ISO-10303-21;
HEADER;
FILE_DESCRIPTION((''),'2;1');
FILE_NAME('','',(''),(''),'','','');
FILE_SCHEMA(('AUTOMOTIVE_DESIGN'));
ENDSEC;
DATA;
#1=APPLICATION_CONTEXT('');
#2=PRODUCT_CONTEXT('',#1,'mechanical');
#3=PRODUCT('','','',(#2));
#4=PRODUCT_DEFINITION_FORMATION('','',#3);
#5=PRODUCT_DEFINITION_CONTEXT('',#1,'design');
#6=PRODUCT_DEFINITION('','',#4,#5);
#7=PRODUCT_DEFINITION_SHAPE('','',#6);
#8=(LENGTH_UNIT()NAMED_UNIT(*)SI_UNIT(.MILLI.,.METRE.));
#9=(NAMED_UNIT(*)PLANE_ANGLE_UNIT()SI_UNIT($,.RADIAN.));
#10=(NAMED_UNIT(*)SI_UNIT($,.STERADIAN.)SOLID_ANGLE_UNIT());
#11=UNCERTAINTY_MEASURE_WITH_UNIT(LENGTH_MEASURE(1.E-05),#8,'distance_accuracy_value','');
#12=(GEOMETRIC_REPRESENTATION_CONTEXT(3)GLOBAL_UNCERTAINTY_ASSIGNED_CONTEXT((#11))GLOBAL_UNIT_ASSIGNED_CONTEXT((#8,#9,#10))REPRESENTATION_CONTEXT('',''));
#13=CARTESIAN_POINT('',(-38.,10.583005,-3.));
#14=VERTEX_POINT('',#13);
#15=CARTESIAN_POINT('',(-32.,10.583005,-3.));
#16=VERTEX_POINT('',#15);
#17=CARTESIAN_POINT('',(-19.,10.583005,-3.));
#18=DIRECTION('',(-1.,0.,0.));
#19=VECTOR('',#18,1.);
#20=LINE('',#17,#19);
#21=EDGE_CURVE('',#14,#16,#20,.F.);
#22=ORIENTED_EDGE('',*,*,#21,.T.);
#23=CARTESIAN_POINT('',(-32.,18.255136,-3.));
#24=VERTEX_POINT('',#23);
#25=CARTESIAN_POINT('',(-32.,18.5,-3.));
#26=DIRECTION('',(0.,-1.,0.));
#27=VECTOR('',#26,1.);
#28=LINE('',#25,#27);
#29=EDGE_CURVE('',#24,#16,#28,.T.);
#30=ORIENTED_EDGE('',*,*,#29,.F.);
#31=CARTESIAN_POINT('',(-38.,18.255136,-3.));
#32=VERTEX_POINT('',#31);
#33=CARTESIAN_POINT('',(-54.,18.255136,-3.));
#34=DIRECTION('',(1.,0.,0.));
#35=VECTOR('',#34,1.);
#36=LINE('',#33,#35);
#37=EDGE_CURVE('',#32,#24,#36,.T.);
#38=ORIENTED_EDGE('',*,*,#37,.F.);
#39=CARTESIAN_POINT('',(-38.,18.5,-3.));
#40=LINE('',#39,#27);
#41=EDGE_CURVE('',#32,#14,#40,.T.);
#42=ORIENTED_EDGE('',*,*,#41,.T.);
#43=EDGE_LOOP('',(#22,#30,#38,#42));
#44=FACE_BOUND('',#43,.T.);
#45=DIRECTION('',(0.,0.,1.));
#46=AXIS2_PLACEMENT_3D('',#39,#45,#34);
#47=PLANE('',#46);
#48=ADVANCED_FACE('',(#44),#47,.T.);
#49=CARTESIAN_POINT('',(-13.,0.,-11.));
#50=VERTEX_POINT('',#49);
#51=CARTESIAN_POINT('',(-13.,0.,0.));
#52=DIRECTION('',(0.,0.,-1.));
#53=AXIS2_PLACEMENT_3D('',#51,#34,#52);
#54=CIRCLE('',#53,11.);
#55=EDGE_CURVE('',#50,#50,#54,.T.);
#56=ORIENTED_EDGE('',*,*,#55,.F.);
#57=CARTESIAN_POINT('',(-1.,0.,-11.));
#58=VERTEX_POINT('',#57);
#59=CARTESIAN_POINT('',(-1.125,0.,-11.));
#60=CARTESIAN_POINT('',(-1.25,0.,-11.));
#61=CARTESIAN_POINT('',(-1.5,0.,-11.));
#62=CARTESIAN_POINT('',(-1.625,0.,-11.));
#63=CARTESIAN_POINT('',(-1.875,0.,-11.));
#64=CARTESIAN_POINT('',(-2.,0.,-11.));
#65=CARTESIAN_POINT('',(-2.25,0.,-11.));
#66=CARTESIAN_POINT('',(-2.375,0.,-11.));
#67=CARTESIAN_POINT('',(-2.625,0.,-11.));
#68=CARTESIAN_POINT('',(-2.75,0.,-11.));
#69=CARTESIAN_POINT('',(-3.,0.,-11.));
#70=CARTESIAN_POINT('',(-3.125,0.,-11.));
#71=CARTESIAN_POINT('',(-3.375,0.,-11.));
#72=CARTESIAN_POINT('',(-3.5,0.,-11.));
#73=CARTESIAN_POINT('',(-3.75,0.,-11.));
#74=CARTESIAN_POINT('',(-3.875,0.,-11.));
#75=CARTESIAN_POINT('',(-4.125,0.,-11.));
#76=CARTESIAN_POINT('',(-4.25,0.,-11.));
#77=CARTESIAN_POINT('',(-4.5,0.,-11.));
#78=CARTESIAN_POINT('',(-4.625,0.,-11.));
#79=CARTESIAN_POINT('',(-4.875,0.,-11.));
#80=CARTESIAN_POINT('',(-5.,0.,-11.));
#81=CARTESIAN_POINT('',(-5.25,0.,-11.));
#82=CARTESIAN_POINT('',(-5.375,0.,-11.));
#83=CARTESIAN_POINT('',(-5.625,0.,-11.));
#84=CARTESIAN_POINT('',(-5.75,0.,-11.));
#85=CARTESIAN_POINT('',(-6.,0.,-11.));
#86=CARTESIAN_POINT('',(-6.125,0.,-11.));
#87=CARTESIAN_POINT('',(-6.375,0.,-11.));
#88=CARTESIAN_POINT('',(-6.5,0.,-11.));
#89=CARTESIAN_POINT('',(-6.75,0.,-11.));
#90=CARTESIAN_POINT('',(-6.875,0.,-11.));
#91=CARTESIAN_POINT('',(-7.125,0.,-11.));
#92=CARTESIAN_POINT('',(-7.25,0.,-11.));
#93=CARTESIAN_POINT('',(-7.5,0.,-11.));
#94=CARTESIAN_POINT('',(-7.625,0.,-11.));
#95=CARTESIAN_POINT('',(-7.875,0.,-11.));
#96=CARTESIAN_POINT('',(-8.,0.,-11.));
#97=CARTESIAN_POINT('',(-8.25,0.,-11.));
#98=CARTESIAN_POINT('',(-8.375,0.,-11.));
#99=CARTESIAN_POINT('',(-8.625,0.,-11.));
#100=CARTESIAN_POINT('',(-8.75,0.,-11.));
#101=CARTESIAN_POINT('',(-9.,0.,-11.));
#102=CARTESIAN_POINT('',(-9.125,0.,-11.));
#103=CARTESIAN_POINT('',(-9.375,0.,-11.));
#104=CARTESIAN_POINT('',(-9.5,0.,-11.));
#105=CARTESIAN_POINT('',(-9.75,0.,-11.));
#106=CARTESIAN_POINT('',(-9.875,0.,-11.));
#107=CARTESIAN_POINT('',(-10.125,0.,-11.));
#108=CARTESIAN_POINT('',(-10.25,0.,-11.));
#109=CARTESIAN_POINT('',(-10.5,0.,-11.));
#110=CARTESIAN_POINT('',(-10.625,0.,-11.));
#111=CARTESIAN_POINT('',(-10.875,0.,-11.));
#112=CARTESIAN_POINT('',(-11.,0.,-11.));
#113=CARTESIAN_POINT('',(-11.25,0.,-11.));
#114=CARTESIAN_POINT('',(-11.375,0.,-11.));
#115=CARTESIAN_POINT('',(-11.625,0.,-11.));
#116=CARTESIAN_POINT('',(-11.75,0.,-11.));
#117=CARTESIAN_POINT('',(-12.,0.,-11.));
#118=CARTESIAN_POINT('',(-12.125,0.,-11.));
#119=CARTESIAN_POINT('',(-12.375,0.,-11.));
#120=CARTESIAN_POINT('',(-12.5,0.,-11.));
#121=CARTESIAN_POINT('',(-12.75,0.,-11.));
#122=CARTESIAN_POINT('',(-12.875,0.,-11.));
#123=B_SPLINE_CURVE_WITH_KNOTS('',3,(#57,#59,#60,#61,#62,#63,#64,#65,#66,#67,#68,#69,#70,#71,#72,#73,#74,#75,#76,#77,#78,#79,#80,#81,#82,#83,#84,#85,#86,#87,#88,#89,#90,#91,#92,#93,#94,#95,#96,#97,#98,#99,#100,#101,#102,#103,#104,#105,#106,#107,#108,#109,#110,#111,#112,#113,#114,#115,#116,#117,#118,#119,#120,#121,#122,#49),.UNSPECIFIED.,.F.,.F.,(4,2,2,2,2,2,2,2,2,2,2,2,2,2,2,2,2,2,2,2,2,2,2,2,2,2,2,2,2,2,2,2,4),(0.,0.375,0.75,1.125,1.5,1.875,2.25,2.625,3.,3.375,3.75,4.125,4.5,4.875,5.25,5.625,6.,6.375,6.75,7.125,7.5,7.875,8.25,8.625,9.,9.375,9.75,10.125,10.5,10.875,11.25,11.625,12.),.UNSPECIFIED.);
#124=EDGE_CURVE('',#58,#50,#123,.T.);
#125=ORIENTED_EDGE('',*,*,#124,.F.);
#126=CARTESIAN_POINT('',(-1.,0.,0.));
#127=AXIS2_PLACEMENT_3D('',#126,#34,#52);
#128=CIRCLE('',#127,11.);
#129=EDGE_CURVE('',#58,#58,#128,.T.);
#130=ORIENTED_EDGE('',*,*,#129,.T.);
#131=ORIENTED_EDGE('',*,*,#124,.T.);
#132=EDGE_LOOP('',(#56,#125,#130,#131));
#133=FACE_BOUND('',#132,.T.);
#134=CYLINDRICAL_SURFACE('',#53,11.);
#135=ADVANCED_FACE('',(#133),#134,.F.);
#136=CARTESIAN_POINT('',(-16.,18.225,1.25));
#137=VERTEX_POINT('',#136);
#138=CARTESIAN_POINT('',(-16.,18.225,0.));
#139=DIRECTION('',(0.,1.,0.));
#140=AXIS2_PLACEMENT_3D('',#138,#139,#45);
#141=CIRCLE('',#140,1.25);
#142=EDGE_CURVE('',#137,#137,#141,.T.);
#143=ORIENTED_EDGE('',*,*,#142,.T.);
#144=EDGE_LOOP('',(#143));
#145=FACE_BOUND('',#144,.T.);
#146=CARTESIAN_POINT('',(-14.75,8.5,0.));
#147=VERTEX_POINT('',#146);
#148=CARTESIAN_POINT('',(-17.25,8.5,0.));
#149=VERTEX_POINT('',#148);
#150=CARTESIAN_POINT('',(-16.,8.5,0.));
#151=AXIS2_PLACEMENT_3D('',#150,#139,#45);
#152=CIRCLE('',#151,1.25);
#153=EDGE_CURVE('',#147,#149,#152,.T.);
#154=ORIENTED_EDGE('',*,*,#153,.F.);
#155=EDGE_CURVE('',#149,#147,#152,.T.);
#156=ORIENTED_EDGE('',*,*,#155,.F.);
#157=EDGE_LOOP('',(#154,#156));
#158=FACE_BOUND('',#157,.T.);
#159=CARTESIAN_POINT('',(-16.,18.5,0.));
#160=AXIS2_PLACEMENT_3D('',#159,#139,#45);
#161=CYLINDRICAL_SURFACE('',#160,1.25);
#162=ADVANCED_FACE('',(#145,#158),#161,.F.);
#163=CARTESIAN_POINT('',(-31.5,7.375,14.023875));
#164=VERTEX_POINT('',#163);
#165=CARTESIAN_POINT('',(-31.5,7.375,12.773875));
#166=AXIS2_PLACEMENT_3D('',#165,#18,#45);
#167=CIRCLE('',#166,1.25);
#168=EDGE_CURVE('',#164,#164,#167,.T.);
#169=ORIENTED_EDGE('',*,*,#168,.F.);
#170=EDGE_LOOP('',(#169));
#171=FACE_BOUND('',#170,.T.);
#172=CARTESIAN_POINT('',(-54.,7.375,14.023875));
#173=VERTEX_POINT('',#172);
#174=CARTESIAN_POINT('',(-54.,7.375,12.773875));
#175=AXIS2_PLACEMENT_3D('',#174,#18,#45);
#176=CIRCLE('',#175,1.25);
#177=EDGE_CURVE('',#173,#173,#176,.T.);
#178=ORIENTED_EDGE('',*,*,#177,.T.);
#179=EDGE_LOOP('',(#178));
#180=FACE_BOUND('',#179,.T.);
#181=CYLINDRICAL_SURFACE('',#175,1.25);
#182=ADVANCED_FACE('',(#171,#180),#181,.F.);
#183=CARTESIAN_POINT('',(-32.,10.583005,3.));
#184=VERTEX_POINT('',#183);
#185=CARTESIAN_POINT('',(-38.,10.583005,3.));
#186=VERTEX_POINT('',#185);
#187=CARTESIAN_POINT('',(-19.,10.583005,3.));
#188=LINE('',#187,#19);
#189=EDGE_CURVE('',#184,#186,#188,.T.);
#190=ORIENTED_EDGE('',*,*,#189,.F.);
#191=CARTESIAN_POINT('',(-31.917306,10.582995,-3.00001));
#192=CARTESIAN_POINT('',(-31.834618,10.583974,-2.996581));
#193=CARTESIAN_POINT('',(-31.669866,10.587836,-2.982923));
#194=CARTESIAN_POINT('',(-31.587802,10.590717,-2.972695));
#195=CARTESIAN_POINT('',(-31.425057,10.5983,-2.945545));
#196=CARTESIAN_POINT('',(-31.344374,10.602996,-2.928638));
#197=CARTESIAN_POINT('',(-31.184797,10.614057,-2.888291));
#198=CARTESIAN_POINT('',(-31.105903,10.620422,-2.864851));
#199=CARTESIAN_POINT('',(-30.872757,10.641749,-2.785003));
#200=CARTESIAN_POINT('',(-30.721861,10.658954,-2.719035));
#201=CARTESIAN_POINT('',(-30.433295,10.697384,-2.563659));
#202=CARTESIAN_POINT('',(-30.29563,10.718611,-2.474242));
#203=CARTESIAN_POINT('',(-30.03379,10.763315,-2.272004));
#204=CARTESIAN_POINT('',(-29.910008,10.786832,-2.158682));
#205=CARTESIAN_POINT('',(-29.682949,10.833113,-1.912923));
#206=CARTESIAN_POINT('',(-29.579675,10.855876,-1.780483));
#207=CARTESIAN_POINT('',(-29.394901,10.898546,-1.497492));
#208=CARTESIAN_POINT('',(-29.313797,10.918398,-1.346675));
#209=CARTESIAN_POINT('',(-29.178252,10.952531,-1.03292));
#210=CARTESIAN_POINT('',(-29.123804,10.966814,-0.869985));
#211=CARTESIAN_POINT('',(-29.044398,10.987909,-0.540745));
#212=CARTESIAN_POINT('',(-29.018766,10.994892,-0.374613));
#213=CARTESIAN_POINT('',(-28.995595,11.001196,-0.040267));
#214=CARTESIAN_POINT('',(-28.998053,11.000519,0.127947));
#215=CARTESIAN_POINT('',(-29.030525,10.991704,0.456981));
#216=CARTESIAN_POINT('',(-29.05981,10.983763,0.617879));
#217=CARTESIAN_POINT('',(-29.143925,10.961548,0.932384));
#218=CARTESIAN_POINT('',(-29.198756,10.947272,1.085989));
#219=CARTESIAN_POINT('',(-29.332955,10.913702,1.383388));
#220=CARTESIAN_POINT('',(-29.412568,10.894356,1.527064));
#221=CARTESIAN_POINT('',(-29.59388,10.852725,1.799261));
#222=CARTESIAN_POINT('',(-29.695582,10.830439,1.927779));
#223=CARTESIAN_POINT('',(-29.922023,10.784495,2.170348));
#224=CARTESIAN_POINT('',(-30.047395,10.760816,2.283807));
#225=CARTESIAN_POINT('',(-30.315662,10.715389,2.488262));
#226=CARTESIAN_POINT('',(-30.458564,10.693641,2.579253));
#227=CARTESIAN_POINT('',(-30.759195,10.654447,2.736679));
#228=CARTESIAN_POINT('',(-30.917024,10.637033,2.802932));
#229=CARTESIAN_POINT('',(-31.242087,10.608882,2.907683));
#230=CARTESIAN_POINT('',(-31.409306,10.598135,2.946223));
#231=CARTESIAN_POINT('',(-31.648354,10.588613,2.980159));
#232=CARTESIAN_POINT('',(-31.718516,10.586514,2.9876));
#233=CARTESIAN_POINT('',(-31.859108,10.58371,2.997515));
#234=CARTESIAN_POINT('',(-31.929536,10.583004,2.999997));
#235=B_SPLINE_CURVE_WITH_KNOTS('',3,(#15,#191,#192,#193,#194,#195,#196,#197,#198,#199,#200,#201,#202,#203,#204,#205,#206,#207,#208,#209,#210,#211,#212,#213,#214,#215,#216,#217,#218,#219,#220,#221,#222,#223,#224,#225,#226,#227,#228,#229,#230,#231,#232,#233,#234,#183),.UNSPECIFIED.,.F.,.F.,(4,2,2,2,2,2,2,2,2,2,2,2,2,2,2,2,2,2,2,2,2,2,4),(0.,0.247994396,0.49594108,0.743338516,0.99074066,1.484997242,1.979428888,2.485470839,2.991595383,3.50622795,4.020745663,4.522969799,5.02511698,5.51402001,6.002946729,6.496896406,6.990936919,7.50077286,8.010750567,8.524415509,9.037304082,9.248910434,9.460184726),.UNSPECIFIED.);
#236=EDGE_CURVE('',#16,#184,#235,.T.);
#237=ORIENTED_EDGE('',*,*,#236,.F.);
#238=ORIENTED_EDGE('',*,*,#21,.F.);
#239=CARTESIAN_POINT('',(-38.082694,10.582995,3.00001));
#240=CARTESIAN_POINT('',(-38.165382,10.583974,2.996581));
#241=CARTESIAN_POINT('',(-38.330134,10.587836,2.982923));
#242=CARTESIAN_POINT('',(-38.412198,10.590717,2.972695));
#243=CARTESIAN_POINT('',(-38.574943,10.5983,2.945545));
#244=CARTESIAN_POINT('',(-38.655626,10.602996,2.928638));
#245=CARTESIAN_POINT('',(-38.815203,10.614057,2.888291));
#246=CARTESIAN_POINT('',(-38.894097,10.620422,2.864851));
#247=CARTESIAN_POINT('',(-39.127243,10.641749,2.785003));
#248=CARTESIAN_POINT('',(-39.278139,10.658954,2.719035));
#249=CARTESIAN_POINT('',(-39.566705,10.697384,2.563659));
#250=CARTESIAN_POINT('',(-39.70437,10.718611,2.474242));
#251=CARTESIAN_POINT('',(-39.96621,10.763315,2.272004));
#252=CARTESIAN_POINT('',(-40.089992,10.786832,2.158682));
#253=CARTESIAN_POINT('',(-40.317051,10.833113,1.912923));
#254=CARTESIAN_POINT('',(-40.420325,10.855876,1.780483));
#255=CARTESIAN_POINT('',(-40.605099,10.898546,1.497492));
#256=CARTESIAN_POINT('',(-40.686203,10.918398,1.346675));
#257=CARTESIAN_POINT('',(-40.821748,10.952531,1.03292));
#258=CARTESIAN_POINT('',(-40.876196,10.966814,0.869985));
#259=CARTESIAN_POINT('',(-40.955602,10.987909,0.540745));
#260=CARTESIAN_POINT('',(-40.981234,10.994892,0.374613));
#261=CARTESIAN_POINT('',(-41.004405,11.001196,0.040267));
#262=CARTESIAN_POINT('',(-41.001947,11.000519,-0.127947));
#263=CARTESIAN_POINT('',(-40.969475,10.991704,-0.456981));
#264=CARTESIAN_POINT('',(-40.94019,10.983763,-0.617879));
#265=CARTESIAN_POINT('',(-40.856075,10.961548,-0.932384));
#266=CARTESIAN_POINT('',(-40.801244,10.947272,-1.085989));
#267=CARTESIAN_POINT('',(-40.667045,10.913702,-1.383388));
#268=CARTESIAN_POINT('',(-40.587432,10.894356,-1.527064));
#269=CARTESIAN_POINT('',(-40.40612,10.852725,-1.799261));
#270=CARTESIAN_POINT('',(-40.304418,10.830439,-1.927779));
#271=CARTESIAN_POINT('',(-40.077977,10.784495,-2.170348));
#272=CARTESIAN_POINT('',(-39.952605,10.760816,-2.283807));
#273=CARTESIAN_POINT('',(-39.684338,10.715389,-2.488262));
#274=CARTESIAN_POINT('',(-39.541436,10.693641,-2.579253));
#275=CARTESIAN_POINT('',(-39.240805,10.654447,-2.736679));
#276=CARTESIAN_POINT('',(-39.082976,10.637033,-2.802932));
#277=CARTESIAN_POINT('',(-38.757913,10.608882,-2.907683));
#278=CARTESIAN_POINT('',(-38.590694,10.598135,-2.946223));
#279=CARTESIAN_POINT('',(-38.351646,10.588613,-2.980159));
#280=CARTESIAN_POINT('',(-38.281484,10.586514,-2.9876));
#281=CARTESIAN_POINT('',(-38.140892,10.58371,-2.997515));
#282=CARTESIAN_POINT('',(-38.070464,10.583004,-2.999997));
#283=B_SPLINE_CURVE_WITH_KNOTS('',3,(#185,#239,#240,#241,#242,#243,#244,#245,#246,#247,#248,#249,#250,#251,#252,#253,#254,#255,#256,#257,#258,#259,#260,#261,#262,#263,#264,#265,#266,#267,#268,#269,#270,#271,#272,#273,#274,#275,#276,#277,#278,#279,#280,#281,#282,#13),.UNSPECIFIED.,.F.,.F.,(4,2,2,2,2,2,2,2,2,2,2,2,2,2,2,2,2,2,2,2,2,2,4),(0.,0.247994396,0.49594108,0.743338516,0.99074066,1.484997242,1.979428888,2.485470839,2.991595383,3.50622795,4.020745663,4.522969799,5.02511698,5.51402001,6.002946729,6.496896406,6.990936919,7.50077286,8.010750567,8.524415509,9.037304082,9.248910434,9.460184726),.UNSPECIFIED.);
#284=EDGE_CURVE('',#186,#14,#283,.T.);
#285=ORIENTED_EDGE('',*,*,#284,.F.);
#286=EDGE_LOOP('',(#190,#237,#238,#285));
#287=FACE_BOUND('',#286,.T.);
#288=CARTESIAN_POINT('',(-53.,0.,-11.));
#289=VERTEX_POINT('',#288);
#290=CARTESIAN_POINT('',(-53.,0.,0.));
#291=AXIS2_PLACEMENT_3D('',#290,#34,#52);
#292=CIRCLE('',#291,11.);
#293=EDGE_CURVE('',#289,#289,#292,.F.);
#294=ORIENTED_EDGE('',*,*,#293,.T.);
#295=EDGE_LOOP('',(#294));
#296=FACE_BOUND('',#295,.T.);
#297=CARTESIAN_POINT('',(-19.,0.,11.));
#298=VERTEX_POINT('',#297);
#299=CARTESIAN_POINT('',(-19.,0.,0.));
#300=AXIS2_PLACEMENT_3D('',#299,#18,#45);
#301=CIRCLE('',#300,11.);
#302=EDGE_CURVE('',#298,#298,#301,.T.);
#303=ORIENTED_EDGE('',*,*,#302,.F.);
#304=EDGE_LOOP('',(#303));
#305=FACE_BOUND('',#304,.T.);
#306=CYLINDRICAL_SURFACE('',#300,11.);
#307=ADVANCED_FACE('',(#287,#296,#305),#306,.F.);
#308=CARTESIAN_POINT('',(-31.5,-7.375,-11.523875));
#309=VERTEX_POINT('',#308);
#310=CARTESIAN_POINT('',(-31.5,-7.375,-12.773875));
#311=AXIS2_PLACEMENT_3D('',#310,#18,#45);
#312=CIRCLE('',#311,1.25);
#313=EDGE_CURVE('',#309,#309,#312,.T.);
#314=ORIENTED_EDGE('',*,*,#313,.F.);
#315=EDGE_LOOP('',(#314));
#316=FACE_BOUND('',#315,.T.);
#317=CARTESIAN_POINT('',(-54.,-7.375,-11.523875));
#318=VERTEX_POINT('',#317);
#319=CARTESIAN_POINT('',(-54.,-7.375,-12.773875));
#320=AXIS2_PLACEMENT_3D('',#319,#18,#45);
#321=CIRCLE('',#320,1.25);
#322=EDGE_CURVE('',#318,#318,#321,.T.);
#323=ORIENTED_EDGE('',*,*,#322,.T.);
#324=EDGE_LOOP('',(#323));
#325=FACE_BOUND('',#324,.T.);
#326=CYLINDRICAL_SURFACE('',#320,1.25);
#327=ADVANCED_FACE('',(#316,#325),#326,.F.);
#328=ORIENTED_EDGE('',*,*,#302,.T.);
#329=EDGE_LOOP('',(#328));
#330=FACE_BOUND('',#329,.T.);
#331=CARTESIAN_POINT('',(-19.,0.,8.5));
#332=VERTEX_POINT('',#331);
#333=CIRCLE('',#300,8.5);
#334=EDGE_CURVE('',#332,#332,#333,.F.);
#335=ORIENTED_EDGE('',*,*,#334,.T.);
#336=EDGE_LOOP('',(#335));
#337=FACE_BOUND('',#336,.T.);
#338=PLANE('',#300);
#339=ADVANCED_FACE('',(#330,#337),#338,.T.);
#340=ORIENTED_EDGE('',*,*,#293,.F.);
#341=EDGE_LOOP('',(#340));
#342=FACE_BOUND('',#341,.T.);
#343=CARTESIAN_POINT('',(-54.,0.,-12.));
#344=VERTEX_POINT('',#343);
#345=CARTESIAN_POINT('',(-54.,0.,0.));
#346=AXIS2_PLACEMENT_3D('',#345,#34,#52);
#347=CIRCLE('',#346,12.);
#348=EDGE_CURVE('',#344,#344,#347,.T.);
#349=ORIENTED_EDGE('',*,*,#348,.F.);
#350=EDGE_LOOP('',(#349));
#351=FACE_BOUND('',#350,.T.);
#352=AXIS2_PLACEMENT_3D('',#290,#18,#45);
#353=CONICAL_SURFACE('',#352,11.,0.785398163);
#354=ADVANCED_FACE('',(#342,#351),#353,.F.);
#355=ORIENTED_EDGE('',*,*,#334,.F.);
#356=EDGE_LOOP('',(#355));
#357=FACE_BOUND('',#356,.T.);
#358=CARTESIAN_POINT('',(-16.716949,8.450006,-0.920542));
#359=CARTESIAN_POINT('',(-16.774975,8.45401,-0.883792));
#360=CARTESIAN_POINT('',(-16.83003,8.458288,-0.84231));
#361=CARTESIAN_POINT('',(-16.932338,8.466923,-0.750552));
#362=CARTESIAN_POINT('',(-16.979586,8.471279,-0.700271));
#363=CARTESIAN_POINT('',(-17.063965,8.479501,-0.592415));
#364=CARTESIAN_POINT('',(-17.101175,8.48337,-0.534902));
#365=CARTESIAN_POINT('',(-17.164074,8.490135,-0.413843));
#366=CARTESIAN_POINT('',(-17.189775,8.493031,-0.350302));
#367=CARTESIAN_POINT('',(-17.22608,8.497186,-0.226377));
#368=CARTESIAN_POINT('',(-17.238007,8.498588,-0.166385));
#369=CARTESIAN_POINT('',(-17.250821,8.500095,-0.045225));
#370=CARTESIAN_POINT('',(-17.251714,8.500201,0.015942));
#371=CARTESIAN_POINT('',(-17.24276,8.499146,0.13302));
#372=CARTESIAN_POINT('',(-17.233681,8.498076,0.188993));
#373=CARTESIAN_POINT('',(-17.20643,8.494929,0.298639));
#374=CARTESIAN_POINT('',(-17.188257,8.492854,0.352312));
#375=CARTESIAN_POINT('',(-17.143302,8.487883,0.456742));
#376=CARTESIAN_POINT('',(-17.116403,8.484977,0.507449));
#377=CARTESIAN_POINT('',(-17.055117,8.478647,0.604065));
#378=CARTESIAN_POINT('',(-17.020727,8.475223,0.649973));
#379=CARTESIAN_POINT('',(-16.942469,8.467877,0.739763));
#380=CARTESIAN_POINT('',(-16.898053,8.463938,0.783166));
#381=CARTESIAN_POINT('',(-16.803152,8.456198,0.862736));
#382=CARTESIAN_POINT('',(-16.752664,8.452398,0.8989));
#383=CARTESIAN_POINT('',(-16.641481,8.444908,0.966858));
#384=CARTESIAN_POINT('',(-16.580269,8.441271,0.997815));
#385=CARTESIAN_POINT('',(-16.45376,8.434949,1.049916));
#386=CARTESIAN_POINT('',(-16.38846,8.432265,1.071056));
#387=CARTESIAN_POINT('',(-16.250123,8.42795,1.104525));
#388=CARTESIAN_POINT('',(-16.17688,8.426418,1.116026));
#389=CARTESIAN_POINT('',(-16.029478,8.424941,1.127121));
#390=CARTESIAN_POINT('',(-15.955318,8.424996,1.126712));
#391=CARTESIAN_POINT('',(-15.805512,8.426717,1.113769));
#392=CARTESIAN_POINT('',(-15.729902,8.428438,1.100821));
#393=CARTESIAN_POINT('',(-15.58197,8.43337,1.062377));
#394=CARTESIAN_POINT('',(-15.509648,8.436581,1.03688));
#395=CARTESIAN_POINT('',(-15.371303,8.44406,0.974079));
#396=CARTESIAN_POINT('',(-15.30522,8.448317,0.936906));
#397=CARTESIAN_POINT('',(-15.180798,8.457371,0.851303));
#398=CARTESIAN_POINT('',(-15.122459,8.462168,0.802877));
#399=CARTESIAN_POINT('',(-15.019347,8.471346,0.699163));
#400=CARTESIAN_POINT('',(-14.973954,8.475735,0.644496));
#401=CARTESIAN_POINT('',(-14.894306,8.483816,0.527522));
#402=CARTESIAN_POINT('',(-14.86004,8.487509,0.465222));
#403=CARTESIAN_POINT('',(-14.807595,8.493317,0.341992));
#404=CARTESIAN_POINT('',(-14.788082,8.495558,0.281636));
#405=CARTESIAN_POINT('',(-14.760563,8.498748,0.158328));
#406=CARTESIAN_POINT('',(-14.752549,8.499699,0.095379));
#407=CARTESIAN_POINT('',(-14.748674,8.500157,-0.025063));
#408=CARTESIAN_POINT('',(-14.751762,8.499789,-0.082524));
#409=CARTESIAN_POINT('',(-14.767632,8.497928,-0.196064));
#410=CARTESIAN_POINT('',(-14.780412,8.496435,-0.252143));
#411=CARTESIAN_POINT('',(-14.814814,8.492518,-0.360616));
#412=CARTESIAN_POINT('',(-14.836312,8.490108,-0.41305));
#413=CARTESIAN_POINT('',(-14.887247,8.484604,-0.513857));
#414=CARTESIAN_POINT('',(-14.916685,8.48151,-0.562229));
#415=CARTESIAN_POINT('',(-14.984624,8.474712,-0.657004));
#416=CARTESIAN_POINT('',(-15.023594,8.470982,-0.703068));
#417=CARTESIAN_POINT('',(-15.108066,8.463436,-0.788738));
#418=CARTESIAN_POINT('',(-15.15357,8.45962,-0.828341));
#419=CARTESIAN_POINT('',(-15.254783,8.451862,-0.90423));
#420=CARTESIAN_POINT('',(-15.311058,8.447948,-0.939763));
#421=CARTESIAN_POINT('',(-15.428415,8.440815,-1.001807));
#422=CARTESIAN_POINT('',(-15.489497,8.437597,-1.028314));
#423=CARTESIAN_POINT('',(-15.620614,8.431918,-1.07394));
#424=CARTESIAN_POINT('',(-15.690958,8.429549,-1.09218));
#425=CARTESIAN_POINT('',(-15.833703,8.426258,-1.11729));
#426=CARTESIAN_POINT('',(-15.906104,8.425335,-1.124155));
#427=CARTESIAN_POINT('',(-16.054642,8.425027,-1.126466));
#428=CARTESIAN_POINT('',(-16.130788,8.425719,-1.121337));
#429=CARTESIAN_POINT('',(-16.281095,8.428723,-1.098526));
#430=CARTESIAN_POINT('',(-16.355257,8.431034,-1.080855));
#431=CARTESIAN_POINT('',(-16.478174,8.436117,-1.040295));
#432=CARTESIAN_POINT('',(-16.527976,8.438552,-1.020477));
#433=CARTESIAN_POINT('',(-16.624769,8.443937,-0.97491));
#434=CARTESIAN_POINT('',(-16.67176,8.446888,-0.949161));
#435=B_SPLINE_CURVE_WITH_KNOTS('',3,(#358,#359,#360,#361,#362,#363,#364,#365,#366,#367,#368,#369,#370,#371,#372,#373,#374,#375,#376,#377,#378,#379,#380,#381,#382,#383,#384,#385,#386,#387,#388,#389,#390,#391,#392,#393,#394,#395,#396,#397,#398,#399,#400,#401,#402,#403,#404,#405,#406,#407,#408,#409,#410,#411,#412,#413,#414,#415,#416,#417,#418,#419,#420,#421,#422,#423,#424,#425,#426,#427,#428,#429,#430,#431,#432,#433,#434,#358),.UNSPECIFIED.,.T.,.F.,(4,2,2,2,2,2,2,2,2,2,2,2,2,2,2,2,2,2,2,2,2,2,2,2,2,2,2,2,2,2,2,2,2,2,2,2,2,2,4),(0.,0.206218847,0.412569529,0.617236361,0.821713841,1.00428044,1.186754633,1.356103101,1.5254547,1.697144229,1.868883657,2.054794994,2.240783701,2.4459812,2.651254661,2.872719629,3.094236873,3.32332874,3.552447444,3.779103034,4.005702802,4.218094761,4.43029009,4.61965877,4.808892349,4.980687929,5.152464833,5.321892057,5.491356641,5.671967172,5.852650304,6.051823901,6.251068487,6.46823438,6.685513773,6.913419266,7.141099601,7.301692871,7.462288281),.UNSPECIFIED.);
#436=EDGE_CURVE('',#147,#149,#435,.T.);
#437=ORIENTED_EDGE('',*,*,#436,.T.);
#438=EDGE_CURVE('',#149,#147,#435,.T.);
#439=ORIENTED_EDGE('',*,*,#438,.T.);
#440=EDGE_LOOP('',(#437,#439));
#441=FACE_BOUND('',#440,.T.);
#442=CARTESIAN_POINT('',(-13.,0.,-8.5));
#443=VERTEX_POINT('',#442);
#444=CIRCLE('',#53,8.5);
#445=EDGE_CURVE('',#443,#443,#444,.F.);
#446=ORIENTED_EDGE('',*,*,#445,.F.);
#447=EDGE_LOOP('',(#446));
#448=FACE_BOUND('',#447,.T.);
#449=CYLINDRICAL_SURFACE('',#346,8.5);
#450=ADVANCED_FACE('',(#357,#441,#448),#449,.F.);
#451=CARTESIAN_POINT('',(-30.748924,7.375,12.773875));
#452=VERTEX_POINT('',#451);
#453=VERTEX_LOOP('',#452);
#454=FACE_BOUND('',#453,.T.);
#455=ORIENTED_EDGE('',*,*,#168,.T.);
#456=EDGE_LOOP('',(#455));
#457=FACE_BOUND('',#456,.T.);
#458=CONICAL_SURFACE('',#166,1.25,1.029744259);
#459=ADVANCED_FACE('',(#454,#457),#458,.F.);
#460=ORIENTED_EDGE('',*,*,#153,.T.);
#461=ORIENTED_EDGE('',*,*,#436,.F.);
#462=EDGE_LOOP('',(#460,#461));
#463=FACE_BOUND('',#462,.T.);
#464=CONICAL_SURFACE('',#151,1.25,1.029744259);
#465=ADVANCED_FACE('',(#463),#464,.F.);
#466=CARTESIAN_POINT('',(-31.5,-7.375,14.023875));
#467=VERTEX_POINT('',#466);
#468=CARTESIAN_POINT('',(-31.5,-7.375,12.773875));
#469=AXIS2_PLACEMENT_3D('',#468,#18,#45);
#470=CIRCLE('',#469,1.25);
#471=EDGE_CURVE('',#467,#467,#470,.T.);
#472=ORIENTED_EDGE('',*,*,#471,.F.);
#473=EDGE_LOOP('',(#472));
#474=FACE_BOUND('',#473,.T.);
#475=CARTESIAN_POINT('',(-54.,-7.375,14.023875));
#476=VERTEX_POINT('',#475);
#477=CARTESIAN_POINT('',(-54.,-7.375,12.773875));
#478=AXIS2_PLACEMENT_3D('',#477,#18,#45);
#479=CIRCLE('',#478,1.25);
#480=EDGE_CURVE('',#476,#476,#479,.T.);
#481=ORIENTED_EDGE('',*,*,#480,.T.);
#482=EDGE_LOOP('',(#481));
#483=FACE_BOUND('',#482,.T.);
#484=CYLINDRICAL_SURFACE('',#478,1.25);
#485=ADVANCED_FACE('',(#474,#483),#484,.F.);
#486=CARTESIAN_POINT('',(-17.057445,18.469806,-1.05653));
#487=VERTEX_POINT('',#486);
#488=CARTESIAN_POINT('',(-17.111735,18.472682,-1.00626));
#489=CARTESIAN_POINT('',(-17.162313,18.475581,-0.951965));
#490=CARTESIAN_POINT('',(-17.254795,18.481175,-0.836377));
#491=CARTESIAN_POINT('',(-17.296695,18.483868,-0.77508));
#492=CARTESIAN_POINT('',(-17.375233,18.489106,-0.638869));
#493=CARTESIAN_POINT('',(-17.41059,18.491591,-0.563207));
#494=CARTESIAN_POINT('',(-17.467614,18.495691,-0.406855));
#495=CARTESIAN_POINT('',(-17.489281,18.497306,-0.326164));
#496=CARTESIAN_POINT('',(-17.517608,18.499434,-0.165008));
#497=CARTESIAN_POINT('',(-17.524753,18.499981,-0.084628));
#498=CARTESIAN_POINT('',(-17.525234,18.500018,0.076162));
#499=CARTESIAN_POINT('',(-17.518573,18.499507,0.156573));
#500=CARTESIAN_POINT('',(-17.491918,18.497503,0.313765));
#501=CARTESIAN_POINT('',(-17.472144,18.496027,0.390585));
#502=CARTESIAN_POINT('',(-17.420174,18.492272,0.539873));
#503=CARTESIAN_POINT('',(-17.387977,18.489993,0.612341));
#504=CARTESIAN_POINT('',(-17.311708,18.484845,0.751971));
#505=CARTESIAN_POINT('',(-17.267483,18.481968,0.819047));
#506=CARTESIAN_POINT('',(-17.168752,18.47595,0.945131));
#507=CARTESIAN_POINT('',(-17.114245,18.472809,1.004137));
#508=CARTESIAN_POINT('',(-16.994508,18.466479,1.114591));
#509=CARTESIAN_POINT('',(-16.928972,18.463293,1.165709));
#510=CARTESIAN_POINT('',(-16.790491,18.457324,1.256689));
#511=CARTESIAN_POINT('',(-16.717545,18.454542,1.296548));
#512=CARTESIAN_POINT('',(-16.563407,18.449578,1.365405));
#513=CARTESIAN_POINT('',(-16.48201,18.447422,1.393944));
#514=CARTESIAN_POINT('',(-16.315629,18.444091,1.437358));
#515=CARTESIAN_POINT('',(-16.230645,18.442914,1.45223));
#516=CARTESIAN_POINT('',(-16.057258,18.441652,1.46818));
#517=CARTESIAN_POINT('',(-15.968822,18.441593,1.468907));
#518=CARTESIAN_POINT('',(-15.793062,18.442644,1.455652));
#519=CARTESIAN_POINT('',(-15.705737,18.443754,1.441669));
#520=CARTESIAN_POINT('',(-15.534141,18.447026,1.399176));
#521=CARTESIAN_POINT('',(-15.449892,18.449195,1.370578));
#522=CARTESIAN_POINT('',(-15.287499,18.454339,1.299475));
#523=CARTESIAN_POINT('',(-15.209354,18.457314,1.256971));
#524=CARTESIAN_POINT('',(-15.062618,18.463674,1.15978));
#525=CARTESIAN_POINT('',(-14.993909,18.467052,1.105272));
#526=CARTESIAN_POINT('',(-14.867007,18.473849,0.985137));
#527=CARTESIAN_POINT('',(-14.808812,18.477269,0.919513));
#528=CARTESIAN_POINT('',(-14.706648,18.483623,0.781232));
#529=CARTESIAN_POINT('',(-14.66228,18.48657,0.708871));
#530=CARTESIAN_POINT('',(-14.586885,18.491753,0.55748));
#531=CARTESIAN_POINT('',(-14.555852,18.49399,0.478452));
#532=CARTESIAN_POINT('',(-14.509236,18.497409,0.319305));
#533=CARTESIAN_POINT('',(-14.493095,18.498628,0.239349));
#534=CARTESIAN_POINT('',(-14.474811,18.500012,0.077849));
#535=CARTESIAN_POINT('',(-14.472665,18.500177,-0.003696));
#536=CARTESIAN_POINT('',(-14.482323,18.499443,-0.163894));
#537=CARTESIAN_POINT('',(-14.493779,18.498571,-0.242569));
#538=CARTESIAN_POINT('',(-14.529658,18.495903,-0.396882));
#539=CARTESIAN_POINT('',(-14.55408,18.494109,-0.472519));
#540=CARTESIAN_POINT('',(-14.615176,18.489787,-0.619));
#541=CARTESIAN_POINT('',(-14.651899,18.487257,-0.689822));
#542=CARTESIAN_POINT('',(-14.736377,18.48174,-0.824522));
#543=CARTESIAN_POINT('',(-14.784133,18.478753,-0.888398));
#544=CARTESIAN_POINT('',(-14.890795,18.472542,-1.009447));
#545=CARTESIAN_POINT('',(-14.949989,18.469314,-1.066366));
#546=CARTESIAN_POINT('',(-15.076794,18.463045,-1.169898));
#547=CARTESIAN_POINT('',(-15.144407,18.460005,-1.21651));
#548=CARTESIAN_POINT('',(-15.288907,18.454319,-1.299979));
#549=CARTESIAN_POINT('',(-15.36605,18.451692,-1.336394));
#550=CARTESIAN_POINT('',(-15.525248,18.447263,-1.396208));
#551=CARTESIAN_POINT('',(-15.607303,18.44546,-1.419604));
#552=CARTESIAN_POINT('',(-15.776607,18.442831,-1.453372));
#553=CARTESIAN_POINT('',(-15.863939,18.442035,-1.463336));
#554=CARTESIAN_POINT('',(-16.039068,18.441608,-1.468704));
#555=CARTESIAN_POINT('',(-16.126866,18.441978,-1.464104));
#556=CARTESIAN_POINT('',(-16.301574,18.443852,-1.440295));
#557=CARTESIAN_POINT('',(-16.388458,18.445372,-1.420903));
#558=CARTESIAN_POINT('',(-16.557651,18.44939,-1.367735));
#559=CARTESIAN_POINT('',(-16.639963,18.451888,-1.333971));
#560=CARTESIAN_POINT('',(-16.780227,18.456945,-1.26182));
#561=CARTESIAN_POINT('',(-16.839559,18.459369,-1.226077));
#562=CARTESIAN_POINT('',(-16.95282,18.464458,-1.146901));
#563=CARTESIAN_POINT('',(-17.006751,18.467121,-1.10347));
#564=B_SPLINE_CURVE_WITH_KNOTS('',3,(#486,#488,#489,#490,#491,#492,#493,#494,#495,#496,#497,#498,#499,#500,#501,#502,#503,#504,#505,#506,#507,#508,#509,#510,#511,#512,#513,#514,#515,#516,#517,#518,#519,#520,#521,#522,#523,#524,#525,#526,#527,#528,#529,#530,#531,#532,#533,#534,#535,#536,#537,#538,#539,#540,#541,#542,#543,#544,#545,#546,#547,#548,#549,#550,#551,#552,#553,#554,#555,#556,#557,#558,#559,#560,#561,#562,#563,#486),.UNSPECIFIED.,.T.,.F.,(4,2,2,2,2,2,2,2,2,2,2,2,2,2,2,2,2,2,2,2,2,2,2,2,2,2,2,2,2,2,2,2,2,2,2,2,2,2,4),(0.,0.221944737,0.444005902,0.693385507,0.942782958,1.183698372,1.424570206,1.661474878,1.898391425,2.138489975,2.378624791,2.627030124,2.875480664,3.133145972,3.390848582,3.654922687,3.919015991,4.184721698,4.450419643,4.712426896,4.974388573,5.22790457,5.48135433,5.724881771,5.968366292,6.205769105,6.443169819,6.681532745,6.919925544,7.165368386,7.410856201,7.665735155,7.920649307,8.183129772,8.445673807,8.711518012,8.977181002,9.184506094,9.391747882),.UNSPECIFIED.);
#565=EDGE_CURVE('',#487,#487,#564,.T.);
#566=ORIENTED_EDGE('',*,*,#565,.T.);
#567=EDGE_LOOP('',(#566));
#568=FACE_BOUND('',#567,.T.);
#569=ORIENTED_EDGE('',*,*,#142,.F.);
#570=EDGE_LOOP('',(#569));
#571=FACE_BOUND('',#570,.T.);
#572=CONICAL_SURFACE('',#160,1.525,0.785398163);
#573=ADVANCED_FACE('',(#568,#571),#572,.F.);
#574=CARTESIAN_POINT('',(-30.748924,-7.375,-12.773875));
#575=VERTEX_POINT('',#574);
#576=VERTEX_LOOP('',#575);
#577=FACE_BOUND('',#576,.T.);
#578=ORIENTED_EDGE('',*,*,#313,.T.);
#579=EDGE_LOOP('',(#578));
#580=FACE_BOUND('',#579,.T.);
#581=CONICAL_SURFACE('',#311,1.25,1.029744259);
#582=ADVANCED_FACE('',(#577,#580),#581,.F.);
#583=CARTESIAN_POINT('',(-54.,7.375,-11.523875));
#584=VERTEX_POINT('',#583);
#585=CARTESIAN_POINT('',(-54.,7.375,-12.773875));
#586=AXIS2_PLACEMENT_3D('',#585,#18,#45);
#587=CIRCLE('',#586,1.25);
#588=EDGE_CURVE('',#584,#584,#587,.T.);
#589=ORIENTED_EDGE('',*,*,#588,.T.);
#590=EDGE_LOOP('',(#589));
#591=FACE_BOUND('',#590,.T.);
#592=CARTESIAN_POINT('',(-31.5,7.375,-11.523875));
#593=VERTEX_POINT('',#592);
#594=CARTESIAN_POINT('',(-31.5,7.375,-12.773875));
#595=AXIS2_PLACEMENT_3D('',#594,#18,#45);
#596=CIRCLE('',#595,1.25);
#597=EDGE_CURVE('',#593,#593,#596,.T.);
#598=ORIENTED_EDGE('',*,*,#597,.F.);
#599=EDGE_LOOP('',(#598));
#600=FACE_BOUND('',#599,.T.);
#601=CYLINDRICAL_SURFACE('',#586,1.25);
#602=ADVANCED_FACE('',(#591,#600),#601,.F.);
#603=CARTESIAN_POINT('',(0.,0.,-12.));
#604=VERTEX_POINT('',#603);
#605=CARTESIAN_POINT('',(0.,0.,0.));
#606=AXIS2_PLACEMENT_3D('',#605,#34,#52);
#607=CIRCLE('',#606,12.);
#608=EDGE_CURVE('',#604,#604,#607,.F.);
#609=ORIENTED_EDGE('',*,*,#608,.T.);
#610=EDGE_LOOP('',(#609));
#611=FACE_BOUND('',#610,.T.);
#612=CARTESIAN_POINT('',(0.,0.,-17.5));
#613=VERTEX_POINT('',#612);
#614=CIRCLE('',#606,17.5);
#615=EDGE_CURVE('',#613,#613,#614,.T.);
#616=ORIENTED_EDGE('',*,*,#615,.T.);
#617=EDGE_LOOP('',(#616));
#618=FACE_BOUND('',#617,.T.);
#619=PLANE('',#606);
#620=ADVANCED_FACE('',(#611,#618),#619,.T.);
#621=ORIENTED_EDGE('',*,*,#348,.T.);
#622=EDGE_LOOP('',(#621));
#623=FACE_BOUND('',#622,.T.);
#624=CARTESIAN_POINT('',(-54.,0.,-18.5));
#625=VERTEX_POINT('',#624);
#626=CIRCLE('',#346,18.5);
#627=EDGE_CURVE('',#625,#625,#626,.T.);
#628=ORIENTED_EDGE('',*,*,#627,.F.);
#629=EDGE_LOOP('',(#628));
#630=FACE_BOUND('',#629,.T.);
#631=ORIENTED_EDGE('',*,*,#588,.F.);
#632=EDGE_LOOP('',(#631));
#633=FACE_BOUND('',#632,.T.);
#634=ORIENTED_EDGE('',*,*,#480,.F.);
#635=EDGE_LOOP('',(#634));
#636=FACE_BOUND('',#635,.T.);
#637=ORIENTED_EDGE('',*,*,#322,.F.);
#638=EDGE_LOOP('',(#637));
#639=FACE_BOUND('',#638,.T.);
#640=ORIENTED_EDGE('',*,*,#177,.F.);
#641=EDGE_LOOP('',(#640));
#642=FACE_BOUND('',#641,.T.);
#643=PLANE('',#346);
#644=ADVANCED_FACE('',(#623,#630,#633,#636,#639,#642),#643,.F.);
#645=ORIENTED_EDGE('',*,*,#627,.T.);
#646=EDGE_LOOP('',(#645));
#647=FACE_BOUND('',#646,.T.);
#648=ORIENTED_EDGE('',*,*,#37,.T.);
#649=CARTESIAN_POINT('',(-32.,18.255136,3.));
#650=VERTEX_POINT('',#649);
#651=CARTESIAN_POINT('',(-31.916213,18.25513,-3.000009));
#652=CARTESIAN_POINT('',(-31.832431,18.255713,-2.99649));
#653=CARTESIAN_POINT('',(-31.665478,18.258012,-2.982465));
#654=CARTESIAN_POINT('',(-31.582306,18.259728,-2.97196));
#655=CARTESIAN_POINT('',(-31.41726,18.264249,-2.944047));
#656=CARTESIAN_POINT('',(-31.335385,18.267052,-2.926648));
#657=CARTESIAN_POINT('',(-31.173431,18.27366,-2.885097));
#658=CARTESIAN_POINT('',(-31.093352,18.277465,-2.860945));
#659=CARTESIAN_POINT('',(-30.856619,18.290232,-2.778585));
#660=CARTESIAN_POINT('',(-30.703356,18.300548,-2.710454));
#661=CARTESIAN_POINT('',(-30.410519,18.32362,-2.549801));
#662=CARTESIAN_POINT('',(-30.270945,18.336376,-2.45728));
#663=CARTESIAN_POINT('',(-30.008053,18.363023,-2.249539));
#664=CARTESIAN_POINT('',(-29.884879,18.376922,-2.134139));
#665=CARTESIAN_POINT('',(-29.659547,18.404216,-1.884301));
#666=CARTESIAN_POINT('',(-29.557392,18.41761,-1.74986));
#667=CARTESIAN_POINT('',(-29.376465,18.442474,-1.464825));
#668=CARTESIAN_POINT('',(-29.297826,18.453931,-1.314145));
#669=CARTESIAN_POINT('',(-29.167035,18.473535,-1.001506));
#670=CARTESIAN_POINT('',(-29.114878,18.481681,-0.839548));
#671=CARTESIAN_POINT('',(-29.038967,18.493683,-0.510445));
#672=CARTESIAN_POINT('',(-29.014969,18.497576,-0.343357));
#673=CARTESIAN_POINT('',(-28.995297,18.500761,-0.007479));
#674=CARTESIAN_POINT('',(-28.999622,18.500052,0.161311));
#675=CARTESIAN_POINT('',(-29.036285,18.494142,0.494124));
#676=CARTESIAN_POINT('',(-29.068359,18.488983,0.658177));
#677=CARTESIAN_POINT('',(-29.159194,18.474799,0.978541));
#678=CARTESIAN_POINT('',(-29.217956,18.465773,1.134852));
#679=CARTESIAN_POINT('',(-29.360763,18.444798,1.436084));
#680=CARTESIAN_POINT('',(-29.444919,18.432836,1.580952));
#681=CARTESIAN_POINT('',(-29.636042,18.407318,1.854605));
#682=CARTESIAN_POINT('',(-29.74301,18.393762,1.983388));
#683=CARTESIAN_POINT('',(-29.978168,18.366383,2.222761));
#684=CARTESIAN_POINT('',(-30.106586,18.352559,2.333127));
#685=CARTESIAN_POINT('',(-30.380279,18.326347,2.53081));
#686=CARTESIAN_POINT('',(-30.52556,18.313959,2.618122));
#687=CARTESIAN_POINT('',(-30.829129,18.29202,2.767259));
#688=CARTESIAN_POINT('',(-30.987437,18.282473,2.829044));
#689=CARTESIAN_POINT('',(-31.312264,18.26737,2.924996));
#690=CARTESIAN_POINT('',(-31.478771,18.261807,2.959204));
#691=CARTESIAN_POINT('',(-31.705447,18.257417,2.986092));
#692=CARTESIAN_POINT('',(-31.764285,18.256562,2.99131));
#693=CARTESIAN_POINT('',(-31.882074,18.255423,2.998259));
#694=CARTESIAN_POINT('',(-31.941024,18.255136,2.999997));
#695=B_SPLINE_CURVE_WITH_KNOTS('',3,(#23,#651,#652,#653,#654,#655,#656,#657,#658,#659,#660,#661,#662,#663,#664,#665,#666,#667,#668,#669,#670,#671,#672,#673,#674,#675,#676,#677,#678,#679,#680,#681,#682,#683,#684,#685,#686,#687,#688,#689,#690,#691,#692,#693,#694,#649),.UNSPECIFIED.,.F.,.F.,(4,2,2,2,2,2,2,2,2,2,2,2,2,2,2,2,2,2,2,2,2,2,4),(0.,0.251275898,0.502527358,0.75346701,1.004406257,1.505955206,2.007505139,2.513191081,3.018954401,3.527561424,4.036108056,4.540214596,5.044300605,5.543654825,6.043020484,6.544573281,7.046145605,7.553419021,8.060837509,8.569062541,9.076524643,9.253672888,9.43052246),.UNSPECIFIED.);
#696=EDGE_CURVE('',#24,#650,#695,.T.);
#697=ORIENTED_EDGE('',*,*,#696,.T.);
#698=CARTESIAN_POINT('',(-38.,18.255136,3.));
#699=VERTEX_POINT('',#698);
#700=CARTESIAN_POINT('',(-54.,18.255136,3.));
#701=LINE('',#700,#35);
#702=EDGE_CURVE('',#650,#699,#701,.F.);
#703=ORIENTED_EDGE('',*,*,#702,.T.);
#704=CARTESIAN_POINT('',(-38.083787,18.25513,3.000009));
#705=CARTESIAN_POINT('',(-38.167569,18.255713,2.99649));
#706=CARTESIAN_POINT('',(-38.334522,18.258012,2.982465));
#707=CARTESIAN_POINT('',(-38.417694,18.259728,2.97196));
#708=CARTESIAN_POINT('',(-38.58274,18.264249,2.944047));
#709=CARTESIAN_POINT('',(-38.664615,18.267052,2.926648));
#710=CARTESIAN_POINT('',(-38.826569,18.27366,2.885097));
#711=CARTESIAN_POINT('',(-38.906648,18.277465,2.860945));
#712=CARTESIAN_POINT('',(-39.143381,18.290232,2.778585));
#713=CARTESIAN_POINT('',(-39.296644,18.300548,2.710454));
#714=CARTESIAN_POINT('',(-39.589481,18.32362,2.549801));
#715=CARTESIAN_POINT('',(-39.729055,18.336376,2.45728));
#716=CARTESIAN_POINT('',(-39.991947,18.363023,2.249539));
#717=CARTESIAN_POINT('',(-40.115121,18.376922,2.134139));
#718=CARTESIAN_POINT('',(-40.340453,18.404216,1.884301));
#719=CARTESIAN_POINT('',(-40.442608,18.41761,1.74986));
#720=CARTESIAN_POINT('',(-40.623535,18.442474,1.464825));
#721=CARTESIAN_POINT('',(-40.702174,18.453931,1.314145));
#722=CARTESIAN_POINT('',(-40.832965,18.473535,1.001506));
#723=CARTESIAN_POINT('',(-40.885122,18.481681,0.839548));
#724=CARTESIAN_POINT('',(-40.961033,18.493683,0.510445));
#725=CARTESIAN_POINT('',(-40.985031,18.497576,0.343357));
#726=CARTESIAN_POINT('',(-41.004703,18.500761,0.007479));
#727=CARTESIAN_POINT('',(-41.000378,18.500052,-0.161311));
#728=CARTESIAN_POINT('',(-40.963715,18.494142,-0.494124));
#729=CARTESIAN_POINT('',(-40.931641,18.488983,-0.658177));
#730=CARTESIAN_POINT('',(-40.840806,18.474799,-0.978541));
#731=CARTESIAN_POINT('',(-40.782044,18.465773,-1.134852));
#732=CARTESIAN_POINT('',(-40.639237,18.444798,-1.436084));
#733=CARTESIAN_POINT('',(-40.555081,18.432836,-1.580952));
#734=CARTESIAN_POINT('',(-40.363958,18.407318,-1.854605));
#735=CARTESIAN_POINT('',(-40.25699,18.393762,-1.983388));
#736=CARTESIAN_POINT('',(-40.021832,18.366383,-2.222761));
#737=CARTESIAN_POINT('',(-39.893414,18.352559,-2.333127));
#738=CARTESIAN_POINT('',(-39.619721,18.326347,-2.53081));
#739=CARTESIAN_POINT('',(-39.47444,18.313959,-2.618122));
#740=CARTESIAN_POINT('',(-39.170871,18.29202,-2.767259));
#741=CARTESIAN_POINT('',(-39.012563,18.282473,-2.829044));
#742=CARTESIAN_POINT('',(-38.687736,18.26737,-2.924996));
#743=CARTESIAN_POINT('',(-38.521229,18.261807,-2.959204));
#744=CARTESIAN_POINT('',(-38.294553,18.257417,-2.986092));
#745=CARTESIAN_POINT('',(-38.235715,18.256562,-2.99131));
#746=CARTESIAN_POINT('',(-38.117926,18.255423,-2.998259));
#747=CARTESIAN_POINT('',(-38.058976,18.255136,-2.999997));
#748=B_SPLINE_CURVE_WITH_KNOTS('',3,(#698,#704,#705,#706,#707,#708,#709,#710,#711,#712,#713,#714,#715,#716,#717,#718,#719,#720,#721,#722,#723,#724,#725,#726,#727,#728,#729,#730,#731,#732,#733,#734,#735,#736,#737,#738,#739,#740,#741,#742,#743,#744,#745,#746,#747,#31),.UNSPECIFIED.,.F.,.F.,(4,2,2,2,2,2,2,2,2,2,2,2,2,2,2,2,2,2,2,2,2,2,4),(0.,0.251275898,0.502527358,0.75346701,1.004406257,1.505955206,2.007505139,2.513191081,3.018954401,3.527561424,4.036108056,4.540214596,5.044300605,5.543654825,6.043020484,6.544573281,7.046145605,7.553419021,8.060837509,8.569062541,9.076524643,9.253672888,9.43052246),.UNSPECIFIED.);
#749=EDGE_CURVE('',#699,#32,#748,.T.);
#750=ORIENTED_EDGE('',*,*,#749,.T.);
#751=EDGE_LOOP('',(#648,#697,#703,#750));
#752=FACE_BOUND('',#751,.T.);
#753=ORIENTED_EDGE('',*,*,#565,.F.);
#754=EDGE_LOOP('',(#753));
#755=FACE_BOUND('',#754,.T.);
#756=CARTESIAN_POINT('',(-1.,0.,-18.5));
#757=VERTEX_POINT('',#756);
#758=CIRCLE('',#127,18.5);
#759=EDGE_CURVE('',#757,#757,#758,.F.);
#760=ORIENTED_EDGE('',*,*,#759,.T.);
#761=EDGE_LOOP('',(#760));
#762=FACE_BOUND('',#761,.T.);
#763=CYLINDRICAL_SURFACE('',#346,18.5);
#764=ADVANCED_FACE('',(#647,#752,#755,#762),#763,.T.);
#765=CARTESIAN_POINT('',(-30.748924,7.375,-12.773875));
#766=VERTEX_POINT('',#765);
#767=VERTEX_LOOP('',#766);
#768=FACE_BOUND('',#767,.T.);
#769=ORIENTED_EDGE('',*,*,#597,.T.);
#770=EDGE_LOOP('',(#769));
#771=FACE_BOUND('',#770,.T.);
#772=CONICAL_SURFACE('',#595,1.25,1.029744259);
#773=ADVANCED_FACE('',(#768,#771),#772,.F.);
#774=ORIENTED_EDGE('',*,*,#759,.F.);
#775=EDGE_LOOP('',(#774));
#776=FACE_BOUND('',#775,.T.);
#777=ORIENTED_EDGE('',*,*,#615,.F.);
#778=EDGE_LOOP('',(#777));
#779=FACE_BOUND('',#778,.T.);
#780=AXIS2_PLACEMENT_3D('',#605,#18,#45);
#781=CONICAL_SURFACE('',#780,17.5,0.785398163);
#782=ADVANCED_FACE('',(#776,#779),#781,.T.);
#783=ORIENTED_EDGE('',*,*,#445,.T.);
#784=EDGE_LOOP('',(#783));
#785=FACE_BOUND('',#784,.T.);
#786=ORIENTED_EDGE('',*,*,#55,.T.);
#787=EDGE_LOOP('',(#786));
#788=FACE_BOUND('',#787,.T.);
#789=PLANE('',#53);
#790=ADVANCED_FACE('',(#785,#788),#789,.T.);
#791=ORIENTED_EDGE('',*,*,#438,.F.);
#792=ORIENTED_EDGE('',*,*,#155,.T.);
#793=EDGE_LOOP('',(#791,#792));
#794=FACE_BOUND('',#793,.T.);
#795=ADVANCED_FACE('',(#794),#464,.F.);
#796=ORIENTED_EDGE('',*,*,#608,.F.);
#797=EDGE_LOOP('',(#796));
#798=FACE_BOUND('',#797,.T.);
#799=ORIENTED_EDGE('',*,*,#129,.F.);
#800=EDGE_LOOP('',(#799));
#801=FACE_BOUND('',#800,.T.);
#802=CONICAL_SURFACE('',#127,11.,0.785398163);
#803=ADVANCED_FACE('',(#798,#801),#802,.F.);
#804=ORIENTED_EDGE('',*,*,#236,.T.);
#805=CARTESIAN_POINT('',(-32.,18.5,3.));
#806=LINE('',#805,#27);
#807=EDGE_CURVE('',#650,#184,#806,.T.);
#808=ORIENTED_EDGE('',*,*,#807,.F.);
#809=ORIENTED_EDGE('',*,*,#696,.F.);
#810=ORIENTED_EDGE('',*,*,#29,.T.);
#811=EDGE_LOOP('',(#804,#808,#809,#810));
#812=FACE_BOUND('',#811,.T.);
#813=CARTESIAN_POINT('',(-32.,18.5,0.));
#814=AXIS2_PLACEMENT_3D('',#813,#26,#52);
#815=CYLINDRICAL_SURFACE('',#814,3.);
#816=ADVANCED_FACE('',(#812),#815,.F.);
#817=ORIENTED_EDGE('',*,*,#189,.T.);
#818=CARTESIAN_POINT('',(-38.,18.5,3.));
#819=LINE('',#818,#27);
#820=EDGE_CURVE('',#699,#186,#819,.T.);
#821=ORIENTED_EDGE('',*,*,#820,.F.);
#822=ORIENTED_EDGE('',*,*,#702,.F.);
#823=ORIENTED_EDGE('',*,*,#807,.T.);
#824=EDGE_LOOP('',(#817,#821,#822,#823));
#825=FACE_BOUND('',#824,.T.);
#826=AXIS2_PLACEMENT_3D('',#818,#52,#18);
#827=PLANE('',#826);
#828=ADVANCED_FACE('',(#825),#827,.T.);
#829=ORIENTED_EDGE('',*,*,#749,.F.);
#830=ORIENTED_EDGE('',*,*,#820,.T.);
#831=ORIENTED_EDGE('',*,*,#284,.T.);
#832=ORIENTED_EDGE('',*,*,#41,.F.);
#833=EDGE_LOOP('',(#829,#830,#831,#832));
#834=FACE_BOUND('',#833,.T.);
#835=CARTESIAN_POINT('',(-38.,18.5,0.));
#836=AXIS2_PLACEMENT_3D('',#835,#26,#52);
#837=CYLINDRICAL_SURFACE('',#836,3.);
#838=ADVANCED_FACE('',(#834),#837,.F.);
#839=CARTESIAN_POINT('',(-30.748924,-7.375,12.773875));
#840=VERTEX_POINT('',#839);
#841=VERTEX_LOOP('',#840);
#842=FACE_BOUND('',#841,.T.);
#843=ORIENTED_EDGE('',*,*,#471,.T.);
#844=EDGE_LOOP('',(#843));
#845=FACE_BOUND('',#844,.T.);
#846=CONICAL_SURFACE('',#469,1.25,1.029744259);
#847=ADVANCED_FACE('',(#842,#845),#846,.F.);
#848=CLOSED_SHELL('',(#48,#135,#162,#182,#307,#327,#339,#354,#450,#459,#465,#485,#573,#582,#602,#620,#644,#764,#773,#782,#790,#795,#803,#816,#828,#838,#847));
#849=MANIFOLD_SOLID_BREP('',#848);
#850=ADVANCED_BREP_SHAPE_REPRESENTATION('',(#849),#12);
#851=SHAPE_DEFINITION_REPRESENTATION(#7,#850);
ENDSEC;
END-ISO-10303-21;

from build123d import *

# Parameters (mm, degrees)
SKETCH_1_R            = 18.5
EXTRUDE_312_DEPTH     = 54
SKETCH_2_R            = 8.5
CUT_EXTRUDE_18_DEPTH  = 61.004166522
SKETCH_3_R            = 11
CUT_EXTRUDE_22_DEPTH  = 35
CUT_EXTRUDE_722_DEPTH = 61.004166522
HOLE_WIZARD_M3_D      = 2.5
HOLE_WIZARD_M3_DEPTH  = 22.5
HOLE_WIZARD_M3_TIP    = 0.751075774
CUT_EXTRUDE_START     = -13
SKETCH_10_R           = 11
CUT_EXTRUDE_1_DEPTH   = 13
CHAMFER_1_SIZE        = 1


# Read off the part's stored shape, not the designer's step: Масленка M3
with BuildPart() as part:
    # Эскиз1 → Extrude 312 (new body)
    with BuildSketch(Plane(origin=(0, 0, 0), x_dir=(0, 0, -1), z_dir=(1, 0, 0))):
        Circle(SKETCH_1_R)
    extrude(amount=-EXTRUDE_312_DEPTH)

    # Эскиз2 → Вырез18 (cut, through all)
    with BuildSketch(Plane(origin=(0, 0, 0), x_dir=(0, 0, -1), z_dir=(1, 0, 0))):
        Circle(SKETCH_2_R)
    extrude(amount=-CUT_EXTRUDE_18_DEPTH, mode=Mode.SUBTRACT)

    # Эскиз3 → Вырез22 (cut)
    with BuildSketch(Plane.ZY.offset(54)):
        Circle(SKETCH_3_R)
    extrude(amount=-CUT_EXTRUDE_22_DEPTH, mode=Mode.SUBTRACT)

    # Эскиз4 → Cut-Extrude 722 (cut, through all)
    with BuildSketch(Plane(origin=(0, 0, 0), x_dir=(1, 0, 0), z_dir=(0, 1, 0))):
        with BuildLine():
            Line((-38, 3), (-32, 3))
            ThreePointArc((-32, 3), (-29, 0), (-32, -3))
            Line((-32, -3), (-38, -3))
            ThreePointArc((-38, -3), (-41, 0), (-38, 3))
        make_face()
    extrude(amount=CUT_EXTRUDE_722_DEPTH, mode=Mode.SUBTRACT)

    # Hole Wizard M3
    with Locations(Plane.ZY.offset(54)):
        with Locations((-12.773874706, 7.375), (-12.773874706, -7.375), (12.773874706, 7.375), (12.773874706, -7.375)):
            Hole(HOLE_WIZARD_M3_D / 2, depth=HOLE_WIZARD_M3_DEPTH)
            with Locations((0, 0, -(HOLE_WIZARD_M3_DEPTH + HOLE_WIZARD_M3_TIP / 2))):  # 118° drill point
                Cone(0, HOLE_WIZARD_M3_D / 2, HOLE_WIZARD_M3_TIP, mode=Mode.SUBTRACT)

    # Эскиз10 → Вырез-Вытянуть1 (cut)
    with BuildSketch(Plane(origin=(0, 0, 0), x_dir=(0, 0, -1), z_dir=(1, 0, 0)).offset(CUT_EXTRUDE_START)):
        with Locations(Location((0, 0, 0), (0, 0, 180))):
            Circle(SKETCH_10_R)
    extrude(amount=CUT_EXTRUDE_1_DEPTH, mode=Mode.SUBTRACT)

    # Фаска1
    chamfer_1_edges = [part.edges().sort_by_distance(p)[0] for p in [
        (-54, 0, -11),
        (0, 0, 18.5),
        (0, 0, -11),
    ]]
    chamfer(chamfer_1_edges, length=CHAMFER_1_SIZE)

    # Hole Wizard M3 2 outline → Hole Wizard M3 2 (revolve, cut)
    with BuildSketch(Plane(origin=(-16, 0, 0), x_dir=(1, 0, 0), z_dir=(0, 0, 1))):
        Polygon((1.12540101, 18.500010757), (1.12540101, 8.425110656), (1.250001052, 8.500000632), (1.25, 18.225), (1.25, 18.500010757), align=None)
        Polygon((0, 8.425110656), (1.125382105, 8.425110656), (1.12540101, 18.500010757), (0, 18.500010757), align=None)
        Polygon((1.25, 18.500010757), (1.25, 18.225), (1.525010757, 18.500010757), align=None)
    revolve(axis=Axis((-16, 0, 0), (0, 1, 0)), mode=Mode.SUBTRACT)


solid = part.part
